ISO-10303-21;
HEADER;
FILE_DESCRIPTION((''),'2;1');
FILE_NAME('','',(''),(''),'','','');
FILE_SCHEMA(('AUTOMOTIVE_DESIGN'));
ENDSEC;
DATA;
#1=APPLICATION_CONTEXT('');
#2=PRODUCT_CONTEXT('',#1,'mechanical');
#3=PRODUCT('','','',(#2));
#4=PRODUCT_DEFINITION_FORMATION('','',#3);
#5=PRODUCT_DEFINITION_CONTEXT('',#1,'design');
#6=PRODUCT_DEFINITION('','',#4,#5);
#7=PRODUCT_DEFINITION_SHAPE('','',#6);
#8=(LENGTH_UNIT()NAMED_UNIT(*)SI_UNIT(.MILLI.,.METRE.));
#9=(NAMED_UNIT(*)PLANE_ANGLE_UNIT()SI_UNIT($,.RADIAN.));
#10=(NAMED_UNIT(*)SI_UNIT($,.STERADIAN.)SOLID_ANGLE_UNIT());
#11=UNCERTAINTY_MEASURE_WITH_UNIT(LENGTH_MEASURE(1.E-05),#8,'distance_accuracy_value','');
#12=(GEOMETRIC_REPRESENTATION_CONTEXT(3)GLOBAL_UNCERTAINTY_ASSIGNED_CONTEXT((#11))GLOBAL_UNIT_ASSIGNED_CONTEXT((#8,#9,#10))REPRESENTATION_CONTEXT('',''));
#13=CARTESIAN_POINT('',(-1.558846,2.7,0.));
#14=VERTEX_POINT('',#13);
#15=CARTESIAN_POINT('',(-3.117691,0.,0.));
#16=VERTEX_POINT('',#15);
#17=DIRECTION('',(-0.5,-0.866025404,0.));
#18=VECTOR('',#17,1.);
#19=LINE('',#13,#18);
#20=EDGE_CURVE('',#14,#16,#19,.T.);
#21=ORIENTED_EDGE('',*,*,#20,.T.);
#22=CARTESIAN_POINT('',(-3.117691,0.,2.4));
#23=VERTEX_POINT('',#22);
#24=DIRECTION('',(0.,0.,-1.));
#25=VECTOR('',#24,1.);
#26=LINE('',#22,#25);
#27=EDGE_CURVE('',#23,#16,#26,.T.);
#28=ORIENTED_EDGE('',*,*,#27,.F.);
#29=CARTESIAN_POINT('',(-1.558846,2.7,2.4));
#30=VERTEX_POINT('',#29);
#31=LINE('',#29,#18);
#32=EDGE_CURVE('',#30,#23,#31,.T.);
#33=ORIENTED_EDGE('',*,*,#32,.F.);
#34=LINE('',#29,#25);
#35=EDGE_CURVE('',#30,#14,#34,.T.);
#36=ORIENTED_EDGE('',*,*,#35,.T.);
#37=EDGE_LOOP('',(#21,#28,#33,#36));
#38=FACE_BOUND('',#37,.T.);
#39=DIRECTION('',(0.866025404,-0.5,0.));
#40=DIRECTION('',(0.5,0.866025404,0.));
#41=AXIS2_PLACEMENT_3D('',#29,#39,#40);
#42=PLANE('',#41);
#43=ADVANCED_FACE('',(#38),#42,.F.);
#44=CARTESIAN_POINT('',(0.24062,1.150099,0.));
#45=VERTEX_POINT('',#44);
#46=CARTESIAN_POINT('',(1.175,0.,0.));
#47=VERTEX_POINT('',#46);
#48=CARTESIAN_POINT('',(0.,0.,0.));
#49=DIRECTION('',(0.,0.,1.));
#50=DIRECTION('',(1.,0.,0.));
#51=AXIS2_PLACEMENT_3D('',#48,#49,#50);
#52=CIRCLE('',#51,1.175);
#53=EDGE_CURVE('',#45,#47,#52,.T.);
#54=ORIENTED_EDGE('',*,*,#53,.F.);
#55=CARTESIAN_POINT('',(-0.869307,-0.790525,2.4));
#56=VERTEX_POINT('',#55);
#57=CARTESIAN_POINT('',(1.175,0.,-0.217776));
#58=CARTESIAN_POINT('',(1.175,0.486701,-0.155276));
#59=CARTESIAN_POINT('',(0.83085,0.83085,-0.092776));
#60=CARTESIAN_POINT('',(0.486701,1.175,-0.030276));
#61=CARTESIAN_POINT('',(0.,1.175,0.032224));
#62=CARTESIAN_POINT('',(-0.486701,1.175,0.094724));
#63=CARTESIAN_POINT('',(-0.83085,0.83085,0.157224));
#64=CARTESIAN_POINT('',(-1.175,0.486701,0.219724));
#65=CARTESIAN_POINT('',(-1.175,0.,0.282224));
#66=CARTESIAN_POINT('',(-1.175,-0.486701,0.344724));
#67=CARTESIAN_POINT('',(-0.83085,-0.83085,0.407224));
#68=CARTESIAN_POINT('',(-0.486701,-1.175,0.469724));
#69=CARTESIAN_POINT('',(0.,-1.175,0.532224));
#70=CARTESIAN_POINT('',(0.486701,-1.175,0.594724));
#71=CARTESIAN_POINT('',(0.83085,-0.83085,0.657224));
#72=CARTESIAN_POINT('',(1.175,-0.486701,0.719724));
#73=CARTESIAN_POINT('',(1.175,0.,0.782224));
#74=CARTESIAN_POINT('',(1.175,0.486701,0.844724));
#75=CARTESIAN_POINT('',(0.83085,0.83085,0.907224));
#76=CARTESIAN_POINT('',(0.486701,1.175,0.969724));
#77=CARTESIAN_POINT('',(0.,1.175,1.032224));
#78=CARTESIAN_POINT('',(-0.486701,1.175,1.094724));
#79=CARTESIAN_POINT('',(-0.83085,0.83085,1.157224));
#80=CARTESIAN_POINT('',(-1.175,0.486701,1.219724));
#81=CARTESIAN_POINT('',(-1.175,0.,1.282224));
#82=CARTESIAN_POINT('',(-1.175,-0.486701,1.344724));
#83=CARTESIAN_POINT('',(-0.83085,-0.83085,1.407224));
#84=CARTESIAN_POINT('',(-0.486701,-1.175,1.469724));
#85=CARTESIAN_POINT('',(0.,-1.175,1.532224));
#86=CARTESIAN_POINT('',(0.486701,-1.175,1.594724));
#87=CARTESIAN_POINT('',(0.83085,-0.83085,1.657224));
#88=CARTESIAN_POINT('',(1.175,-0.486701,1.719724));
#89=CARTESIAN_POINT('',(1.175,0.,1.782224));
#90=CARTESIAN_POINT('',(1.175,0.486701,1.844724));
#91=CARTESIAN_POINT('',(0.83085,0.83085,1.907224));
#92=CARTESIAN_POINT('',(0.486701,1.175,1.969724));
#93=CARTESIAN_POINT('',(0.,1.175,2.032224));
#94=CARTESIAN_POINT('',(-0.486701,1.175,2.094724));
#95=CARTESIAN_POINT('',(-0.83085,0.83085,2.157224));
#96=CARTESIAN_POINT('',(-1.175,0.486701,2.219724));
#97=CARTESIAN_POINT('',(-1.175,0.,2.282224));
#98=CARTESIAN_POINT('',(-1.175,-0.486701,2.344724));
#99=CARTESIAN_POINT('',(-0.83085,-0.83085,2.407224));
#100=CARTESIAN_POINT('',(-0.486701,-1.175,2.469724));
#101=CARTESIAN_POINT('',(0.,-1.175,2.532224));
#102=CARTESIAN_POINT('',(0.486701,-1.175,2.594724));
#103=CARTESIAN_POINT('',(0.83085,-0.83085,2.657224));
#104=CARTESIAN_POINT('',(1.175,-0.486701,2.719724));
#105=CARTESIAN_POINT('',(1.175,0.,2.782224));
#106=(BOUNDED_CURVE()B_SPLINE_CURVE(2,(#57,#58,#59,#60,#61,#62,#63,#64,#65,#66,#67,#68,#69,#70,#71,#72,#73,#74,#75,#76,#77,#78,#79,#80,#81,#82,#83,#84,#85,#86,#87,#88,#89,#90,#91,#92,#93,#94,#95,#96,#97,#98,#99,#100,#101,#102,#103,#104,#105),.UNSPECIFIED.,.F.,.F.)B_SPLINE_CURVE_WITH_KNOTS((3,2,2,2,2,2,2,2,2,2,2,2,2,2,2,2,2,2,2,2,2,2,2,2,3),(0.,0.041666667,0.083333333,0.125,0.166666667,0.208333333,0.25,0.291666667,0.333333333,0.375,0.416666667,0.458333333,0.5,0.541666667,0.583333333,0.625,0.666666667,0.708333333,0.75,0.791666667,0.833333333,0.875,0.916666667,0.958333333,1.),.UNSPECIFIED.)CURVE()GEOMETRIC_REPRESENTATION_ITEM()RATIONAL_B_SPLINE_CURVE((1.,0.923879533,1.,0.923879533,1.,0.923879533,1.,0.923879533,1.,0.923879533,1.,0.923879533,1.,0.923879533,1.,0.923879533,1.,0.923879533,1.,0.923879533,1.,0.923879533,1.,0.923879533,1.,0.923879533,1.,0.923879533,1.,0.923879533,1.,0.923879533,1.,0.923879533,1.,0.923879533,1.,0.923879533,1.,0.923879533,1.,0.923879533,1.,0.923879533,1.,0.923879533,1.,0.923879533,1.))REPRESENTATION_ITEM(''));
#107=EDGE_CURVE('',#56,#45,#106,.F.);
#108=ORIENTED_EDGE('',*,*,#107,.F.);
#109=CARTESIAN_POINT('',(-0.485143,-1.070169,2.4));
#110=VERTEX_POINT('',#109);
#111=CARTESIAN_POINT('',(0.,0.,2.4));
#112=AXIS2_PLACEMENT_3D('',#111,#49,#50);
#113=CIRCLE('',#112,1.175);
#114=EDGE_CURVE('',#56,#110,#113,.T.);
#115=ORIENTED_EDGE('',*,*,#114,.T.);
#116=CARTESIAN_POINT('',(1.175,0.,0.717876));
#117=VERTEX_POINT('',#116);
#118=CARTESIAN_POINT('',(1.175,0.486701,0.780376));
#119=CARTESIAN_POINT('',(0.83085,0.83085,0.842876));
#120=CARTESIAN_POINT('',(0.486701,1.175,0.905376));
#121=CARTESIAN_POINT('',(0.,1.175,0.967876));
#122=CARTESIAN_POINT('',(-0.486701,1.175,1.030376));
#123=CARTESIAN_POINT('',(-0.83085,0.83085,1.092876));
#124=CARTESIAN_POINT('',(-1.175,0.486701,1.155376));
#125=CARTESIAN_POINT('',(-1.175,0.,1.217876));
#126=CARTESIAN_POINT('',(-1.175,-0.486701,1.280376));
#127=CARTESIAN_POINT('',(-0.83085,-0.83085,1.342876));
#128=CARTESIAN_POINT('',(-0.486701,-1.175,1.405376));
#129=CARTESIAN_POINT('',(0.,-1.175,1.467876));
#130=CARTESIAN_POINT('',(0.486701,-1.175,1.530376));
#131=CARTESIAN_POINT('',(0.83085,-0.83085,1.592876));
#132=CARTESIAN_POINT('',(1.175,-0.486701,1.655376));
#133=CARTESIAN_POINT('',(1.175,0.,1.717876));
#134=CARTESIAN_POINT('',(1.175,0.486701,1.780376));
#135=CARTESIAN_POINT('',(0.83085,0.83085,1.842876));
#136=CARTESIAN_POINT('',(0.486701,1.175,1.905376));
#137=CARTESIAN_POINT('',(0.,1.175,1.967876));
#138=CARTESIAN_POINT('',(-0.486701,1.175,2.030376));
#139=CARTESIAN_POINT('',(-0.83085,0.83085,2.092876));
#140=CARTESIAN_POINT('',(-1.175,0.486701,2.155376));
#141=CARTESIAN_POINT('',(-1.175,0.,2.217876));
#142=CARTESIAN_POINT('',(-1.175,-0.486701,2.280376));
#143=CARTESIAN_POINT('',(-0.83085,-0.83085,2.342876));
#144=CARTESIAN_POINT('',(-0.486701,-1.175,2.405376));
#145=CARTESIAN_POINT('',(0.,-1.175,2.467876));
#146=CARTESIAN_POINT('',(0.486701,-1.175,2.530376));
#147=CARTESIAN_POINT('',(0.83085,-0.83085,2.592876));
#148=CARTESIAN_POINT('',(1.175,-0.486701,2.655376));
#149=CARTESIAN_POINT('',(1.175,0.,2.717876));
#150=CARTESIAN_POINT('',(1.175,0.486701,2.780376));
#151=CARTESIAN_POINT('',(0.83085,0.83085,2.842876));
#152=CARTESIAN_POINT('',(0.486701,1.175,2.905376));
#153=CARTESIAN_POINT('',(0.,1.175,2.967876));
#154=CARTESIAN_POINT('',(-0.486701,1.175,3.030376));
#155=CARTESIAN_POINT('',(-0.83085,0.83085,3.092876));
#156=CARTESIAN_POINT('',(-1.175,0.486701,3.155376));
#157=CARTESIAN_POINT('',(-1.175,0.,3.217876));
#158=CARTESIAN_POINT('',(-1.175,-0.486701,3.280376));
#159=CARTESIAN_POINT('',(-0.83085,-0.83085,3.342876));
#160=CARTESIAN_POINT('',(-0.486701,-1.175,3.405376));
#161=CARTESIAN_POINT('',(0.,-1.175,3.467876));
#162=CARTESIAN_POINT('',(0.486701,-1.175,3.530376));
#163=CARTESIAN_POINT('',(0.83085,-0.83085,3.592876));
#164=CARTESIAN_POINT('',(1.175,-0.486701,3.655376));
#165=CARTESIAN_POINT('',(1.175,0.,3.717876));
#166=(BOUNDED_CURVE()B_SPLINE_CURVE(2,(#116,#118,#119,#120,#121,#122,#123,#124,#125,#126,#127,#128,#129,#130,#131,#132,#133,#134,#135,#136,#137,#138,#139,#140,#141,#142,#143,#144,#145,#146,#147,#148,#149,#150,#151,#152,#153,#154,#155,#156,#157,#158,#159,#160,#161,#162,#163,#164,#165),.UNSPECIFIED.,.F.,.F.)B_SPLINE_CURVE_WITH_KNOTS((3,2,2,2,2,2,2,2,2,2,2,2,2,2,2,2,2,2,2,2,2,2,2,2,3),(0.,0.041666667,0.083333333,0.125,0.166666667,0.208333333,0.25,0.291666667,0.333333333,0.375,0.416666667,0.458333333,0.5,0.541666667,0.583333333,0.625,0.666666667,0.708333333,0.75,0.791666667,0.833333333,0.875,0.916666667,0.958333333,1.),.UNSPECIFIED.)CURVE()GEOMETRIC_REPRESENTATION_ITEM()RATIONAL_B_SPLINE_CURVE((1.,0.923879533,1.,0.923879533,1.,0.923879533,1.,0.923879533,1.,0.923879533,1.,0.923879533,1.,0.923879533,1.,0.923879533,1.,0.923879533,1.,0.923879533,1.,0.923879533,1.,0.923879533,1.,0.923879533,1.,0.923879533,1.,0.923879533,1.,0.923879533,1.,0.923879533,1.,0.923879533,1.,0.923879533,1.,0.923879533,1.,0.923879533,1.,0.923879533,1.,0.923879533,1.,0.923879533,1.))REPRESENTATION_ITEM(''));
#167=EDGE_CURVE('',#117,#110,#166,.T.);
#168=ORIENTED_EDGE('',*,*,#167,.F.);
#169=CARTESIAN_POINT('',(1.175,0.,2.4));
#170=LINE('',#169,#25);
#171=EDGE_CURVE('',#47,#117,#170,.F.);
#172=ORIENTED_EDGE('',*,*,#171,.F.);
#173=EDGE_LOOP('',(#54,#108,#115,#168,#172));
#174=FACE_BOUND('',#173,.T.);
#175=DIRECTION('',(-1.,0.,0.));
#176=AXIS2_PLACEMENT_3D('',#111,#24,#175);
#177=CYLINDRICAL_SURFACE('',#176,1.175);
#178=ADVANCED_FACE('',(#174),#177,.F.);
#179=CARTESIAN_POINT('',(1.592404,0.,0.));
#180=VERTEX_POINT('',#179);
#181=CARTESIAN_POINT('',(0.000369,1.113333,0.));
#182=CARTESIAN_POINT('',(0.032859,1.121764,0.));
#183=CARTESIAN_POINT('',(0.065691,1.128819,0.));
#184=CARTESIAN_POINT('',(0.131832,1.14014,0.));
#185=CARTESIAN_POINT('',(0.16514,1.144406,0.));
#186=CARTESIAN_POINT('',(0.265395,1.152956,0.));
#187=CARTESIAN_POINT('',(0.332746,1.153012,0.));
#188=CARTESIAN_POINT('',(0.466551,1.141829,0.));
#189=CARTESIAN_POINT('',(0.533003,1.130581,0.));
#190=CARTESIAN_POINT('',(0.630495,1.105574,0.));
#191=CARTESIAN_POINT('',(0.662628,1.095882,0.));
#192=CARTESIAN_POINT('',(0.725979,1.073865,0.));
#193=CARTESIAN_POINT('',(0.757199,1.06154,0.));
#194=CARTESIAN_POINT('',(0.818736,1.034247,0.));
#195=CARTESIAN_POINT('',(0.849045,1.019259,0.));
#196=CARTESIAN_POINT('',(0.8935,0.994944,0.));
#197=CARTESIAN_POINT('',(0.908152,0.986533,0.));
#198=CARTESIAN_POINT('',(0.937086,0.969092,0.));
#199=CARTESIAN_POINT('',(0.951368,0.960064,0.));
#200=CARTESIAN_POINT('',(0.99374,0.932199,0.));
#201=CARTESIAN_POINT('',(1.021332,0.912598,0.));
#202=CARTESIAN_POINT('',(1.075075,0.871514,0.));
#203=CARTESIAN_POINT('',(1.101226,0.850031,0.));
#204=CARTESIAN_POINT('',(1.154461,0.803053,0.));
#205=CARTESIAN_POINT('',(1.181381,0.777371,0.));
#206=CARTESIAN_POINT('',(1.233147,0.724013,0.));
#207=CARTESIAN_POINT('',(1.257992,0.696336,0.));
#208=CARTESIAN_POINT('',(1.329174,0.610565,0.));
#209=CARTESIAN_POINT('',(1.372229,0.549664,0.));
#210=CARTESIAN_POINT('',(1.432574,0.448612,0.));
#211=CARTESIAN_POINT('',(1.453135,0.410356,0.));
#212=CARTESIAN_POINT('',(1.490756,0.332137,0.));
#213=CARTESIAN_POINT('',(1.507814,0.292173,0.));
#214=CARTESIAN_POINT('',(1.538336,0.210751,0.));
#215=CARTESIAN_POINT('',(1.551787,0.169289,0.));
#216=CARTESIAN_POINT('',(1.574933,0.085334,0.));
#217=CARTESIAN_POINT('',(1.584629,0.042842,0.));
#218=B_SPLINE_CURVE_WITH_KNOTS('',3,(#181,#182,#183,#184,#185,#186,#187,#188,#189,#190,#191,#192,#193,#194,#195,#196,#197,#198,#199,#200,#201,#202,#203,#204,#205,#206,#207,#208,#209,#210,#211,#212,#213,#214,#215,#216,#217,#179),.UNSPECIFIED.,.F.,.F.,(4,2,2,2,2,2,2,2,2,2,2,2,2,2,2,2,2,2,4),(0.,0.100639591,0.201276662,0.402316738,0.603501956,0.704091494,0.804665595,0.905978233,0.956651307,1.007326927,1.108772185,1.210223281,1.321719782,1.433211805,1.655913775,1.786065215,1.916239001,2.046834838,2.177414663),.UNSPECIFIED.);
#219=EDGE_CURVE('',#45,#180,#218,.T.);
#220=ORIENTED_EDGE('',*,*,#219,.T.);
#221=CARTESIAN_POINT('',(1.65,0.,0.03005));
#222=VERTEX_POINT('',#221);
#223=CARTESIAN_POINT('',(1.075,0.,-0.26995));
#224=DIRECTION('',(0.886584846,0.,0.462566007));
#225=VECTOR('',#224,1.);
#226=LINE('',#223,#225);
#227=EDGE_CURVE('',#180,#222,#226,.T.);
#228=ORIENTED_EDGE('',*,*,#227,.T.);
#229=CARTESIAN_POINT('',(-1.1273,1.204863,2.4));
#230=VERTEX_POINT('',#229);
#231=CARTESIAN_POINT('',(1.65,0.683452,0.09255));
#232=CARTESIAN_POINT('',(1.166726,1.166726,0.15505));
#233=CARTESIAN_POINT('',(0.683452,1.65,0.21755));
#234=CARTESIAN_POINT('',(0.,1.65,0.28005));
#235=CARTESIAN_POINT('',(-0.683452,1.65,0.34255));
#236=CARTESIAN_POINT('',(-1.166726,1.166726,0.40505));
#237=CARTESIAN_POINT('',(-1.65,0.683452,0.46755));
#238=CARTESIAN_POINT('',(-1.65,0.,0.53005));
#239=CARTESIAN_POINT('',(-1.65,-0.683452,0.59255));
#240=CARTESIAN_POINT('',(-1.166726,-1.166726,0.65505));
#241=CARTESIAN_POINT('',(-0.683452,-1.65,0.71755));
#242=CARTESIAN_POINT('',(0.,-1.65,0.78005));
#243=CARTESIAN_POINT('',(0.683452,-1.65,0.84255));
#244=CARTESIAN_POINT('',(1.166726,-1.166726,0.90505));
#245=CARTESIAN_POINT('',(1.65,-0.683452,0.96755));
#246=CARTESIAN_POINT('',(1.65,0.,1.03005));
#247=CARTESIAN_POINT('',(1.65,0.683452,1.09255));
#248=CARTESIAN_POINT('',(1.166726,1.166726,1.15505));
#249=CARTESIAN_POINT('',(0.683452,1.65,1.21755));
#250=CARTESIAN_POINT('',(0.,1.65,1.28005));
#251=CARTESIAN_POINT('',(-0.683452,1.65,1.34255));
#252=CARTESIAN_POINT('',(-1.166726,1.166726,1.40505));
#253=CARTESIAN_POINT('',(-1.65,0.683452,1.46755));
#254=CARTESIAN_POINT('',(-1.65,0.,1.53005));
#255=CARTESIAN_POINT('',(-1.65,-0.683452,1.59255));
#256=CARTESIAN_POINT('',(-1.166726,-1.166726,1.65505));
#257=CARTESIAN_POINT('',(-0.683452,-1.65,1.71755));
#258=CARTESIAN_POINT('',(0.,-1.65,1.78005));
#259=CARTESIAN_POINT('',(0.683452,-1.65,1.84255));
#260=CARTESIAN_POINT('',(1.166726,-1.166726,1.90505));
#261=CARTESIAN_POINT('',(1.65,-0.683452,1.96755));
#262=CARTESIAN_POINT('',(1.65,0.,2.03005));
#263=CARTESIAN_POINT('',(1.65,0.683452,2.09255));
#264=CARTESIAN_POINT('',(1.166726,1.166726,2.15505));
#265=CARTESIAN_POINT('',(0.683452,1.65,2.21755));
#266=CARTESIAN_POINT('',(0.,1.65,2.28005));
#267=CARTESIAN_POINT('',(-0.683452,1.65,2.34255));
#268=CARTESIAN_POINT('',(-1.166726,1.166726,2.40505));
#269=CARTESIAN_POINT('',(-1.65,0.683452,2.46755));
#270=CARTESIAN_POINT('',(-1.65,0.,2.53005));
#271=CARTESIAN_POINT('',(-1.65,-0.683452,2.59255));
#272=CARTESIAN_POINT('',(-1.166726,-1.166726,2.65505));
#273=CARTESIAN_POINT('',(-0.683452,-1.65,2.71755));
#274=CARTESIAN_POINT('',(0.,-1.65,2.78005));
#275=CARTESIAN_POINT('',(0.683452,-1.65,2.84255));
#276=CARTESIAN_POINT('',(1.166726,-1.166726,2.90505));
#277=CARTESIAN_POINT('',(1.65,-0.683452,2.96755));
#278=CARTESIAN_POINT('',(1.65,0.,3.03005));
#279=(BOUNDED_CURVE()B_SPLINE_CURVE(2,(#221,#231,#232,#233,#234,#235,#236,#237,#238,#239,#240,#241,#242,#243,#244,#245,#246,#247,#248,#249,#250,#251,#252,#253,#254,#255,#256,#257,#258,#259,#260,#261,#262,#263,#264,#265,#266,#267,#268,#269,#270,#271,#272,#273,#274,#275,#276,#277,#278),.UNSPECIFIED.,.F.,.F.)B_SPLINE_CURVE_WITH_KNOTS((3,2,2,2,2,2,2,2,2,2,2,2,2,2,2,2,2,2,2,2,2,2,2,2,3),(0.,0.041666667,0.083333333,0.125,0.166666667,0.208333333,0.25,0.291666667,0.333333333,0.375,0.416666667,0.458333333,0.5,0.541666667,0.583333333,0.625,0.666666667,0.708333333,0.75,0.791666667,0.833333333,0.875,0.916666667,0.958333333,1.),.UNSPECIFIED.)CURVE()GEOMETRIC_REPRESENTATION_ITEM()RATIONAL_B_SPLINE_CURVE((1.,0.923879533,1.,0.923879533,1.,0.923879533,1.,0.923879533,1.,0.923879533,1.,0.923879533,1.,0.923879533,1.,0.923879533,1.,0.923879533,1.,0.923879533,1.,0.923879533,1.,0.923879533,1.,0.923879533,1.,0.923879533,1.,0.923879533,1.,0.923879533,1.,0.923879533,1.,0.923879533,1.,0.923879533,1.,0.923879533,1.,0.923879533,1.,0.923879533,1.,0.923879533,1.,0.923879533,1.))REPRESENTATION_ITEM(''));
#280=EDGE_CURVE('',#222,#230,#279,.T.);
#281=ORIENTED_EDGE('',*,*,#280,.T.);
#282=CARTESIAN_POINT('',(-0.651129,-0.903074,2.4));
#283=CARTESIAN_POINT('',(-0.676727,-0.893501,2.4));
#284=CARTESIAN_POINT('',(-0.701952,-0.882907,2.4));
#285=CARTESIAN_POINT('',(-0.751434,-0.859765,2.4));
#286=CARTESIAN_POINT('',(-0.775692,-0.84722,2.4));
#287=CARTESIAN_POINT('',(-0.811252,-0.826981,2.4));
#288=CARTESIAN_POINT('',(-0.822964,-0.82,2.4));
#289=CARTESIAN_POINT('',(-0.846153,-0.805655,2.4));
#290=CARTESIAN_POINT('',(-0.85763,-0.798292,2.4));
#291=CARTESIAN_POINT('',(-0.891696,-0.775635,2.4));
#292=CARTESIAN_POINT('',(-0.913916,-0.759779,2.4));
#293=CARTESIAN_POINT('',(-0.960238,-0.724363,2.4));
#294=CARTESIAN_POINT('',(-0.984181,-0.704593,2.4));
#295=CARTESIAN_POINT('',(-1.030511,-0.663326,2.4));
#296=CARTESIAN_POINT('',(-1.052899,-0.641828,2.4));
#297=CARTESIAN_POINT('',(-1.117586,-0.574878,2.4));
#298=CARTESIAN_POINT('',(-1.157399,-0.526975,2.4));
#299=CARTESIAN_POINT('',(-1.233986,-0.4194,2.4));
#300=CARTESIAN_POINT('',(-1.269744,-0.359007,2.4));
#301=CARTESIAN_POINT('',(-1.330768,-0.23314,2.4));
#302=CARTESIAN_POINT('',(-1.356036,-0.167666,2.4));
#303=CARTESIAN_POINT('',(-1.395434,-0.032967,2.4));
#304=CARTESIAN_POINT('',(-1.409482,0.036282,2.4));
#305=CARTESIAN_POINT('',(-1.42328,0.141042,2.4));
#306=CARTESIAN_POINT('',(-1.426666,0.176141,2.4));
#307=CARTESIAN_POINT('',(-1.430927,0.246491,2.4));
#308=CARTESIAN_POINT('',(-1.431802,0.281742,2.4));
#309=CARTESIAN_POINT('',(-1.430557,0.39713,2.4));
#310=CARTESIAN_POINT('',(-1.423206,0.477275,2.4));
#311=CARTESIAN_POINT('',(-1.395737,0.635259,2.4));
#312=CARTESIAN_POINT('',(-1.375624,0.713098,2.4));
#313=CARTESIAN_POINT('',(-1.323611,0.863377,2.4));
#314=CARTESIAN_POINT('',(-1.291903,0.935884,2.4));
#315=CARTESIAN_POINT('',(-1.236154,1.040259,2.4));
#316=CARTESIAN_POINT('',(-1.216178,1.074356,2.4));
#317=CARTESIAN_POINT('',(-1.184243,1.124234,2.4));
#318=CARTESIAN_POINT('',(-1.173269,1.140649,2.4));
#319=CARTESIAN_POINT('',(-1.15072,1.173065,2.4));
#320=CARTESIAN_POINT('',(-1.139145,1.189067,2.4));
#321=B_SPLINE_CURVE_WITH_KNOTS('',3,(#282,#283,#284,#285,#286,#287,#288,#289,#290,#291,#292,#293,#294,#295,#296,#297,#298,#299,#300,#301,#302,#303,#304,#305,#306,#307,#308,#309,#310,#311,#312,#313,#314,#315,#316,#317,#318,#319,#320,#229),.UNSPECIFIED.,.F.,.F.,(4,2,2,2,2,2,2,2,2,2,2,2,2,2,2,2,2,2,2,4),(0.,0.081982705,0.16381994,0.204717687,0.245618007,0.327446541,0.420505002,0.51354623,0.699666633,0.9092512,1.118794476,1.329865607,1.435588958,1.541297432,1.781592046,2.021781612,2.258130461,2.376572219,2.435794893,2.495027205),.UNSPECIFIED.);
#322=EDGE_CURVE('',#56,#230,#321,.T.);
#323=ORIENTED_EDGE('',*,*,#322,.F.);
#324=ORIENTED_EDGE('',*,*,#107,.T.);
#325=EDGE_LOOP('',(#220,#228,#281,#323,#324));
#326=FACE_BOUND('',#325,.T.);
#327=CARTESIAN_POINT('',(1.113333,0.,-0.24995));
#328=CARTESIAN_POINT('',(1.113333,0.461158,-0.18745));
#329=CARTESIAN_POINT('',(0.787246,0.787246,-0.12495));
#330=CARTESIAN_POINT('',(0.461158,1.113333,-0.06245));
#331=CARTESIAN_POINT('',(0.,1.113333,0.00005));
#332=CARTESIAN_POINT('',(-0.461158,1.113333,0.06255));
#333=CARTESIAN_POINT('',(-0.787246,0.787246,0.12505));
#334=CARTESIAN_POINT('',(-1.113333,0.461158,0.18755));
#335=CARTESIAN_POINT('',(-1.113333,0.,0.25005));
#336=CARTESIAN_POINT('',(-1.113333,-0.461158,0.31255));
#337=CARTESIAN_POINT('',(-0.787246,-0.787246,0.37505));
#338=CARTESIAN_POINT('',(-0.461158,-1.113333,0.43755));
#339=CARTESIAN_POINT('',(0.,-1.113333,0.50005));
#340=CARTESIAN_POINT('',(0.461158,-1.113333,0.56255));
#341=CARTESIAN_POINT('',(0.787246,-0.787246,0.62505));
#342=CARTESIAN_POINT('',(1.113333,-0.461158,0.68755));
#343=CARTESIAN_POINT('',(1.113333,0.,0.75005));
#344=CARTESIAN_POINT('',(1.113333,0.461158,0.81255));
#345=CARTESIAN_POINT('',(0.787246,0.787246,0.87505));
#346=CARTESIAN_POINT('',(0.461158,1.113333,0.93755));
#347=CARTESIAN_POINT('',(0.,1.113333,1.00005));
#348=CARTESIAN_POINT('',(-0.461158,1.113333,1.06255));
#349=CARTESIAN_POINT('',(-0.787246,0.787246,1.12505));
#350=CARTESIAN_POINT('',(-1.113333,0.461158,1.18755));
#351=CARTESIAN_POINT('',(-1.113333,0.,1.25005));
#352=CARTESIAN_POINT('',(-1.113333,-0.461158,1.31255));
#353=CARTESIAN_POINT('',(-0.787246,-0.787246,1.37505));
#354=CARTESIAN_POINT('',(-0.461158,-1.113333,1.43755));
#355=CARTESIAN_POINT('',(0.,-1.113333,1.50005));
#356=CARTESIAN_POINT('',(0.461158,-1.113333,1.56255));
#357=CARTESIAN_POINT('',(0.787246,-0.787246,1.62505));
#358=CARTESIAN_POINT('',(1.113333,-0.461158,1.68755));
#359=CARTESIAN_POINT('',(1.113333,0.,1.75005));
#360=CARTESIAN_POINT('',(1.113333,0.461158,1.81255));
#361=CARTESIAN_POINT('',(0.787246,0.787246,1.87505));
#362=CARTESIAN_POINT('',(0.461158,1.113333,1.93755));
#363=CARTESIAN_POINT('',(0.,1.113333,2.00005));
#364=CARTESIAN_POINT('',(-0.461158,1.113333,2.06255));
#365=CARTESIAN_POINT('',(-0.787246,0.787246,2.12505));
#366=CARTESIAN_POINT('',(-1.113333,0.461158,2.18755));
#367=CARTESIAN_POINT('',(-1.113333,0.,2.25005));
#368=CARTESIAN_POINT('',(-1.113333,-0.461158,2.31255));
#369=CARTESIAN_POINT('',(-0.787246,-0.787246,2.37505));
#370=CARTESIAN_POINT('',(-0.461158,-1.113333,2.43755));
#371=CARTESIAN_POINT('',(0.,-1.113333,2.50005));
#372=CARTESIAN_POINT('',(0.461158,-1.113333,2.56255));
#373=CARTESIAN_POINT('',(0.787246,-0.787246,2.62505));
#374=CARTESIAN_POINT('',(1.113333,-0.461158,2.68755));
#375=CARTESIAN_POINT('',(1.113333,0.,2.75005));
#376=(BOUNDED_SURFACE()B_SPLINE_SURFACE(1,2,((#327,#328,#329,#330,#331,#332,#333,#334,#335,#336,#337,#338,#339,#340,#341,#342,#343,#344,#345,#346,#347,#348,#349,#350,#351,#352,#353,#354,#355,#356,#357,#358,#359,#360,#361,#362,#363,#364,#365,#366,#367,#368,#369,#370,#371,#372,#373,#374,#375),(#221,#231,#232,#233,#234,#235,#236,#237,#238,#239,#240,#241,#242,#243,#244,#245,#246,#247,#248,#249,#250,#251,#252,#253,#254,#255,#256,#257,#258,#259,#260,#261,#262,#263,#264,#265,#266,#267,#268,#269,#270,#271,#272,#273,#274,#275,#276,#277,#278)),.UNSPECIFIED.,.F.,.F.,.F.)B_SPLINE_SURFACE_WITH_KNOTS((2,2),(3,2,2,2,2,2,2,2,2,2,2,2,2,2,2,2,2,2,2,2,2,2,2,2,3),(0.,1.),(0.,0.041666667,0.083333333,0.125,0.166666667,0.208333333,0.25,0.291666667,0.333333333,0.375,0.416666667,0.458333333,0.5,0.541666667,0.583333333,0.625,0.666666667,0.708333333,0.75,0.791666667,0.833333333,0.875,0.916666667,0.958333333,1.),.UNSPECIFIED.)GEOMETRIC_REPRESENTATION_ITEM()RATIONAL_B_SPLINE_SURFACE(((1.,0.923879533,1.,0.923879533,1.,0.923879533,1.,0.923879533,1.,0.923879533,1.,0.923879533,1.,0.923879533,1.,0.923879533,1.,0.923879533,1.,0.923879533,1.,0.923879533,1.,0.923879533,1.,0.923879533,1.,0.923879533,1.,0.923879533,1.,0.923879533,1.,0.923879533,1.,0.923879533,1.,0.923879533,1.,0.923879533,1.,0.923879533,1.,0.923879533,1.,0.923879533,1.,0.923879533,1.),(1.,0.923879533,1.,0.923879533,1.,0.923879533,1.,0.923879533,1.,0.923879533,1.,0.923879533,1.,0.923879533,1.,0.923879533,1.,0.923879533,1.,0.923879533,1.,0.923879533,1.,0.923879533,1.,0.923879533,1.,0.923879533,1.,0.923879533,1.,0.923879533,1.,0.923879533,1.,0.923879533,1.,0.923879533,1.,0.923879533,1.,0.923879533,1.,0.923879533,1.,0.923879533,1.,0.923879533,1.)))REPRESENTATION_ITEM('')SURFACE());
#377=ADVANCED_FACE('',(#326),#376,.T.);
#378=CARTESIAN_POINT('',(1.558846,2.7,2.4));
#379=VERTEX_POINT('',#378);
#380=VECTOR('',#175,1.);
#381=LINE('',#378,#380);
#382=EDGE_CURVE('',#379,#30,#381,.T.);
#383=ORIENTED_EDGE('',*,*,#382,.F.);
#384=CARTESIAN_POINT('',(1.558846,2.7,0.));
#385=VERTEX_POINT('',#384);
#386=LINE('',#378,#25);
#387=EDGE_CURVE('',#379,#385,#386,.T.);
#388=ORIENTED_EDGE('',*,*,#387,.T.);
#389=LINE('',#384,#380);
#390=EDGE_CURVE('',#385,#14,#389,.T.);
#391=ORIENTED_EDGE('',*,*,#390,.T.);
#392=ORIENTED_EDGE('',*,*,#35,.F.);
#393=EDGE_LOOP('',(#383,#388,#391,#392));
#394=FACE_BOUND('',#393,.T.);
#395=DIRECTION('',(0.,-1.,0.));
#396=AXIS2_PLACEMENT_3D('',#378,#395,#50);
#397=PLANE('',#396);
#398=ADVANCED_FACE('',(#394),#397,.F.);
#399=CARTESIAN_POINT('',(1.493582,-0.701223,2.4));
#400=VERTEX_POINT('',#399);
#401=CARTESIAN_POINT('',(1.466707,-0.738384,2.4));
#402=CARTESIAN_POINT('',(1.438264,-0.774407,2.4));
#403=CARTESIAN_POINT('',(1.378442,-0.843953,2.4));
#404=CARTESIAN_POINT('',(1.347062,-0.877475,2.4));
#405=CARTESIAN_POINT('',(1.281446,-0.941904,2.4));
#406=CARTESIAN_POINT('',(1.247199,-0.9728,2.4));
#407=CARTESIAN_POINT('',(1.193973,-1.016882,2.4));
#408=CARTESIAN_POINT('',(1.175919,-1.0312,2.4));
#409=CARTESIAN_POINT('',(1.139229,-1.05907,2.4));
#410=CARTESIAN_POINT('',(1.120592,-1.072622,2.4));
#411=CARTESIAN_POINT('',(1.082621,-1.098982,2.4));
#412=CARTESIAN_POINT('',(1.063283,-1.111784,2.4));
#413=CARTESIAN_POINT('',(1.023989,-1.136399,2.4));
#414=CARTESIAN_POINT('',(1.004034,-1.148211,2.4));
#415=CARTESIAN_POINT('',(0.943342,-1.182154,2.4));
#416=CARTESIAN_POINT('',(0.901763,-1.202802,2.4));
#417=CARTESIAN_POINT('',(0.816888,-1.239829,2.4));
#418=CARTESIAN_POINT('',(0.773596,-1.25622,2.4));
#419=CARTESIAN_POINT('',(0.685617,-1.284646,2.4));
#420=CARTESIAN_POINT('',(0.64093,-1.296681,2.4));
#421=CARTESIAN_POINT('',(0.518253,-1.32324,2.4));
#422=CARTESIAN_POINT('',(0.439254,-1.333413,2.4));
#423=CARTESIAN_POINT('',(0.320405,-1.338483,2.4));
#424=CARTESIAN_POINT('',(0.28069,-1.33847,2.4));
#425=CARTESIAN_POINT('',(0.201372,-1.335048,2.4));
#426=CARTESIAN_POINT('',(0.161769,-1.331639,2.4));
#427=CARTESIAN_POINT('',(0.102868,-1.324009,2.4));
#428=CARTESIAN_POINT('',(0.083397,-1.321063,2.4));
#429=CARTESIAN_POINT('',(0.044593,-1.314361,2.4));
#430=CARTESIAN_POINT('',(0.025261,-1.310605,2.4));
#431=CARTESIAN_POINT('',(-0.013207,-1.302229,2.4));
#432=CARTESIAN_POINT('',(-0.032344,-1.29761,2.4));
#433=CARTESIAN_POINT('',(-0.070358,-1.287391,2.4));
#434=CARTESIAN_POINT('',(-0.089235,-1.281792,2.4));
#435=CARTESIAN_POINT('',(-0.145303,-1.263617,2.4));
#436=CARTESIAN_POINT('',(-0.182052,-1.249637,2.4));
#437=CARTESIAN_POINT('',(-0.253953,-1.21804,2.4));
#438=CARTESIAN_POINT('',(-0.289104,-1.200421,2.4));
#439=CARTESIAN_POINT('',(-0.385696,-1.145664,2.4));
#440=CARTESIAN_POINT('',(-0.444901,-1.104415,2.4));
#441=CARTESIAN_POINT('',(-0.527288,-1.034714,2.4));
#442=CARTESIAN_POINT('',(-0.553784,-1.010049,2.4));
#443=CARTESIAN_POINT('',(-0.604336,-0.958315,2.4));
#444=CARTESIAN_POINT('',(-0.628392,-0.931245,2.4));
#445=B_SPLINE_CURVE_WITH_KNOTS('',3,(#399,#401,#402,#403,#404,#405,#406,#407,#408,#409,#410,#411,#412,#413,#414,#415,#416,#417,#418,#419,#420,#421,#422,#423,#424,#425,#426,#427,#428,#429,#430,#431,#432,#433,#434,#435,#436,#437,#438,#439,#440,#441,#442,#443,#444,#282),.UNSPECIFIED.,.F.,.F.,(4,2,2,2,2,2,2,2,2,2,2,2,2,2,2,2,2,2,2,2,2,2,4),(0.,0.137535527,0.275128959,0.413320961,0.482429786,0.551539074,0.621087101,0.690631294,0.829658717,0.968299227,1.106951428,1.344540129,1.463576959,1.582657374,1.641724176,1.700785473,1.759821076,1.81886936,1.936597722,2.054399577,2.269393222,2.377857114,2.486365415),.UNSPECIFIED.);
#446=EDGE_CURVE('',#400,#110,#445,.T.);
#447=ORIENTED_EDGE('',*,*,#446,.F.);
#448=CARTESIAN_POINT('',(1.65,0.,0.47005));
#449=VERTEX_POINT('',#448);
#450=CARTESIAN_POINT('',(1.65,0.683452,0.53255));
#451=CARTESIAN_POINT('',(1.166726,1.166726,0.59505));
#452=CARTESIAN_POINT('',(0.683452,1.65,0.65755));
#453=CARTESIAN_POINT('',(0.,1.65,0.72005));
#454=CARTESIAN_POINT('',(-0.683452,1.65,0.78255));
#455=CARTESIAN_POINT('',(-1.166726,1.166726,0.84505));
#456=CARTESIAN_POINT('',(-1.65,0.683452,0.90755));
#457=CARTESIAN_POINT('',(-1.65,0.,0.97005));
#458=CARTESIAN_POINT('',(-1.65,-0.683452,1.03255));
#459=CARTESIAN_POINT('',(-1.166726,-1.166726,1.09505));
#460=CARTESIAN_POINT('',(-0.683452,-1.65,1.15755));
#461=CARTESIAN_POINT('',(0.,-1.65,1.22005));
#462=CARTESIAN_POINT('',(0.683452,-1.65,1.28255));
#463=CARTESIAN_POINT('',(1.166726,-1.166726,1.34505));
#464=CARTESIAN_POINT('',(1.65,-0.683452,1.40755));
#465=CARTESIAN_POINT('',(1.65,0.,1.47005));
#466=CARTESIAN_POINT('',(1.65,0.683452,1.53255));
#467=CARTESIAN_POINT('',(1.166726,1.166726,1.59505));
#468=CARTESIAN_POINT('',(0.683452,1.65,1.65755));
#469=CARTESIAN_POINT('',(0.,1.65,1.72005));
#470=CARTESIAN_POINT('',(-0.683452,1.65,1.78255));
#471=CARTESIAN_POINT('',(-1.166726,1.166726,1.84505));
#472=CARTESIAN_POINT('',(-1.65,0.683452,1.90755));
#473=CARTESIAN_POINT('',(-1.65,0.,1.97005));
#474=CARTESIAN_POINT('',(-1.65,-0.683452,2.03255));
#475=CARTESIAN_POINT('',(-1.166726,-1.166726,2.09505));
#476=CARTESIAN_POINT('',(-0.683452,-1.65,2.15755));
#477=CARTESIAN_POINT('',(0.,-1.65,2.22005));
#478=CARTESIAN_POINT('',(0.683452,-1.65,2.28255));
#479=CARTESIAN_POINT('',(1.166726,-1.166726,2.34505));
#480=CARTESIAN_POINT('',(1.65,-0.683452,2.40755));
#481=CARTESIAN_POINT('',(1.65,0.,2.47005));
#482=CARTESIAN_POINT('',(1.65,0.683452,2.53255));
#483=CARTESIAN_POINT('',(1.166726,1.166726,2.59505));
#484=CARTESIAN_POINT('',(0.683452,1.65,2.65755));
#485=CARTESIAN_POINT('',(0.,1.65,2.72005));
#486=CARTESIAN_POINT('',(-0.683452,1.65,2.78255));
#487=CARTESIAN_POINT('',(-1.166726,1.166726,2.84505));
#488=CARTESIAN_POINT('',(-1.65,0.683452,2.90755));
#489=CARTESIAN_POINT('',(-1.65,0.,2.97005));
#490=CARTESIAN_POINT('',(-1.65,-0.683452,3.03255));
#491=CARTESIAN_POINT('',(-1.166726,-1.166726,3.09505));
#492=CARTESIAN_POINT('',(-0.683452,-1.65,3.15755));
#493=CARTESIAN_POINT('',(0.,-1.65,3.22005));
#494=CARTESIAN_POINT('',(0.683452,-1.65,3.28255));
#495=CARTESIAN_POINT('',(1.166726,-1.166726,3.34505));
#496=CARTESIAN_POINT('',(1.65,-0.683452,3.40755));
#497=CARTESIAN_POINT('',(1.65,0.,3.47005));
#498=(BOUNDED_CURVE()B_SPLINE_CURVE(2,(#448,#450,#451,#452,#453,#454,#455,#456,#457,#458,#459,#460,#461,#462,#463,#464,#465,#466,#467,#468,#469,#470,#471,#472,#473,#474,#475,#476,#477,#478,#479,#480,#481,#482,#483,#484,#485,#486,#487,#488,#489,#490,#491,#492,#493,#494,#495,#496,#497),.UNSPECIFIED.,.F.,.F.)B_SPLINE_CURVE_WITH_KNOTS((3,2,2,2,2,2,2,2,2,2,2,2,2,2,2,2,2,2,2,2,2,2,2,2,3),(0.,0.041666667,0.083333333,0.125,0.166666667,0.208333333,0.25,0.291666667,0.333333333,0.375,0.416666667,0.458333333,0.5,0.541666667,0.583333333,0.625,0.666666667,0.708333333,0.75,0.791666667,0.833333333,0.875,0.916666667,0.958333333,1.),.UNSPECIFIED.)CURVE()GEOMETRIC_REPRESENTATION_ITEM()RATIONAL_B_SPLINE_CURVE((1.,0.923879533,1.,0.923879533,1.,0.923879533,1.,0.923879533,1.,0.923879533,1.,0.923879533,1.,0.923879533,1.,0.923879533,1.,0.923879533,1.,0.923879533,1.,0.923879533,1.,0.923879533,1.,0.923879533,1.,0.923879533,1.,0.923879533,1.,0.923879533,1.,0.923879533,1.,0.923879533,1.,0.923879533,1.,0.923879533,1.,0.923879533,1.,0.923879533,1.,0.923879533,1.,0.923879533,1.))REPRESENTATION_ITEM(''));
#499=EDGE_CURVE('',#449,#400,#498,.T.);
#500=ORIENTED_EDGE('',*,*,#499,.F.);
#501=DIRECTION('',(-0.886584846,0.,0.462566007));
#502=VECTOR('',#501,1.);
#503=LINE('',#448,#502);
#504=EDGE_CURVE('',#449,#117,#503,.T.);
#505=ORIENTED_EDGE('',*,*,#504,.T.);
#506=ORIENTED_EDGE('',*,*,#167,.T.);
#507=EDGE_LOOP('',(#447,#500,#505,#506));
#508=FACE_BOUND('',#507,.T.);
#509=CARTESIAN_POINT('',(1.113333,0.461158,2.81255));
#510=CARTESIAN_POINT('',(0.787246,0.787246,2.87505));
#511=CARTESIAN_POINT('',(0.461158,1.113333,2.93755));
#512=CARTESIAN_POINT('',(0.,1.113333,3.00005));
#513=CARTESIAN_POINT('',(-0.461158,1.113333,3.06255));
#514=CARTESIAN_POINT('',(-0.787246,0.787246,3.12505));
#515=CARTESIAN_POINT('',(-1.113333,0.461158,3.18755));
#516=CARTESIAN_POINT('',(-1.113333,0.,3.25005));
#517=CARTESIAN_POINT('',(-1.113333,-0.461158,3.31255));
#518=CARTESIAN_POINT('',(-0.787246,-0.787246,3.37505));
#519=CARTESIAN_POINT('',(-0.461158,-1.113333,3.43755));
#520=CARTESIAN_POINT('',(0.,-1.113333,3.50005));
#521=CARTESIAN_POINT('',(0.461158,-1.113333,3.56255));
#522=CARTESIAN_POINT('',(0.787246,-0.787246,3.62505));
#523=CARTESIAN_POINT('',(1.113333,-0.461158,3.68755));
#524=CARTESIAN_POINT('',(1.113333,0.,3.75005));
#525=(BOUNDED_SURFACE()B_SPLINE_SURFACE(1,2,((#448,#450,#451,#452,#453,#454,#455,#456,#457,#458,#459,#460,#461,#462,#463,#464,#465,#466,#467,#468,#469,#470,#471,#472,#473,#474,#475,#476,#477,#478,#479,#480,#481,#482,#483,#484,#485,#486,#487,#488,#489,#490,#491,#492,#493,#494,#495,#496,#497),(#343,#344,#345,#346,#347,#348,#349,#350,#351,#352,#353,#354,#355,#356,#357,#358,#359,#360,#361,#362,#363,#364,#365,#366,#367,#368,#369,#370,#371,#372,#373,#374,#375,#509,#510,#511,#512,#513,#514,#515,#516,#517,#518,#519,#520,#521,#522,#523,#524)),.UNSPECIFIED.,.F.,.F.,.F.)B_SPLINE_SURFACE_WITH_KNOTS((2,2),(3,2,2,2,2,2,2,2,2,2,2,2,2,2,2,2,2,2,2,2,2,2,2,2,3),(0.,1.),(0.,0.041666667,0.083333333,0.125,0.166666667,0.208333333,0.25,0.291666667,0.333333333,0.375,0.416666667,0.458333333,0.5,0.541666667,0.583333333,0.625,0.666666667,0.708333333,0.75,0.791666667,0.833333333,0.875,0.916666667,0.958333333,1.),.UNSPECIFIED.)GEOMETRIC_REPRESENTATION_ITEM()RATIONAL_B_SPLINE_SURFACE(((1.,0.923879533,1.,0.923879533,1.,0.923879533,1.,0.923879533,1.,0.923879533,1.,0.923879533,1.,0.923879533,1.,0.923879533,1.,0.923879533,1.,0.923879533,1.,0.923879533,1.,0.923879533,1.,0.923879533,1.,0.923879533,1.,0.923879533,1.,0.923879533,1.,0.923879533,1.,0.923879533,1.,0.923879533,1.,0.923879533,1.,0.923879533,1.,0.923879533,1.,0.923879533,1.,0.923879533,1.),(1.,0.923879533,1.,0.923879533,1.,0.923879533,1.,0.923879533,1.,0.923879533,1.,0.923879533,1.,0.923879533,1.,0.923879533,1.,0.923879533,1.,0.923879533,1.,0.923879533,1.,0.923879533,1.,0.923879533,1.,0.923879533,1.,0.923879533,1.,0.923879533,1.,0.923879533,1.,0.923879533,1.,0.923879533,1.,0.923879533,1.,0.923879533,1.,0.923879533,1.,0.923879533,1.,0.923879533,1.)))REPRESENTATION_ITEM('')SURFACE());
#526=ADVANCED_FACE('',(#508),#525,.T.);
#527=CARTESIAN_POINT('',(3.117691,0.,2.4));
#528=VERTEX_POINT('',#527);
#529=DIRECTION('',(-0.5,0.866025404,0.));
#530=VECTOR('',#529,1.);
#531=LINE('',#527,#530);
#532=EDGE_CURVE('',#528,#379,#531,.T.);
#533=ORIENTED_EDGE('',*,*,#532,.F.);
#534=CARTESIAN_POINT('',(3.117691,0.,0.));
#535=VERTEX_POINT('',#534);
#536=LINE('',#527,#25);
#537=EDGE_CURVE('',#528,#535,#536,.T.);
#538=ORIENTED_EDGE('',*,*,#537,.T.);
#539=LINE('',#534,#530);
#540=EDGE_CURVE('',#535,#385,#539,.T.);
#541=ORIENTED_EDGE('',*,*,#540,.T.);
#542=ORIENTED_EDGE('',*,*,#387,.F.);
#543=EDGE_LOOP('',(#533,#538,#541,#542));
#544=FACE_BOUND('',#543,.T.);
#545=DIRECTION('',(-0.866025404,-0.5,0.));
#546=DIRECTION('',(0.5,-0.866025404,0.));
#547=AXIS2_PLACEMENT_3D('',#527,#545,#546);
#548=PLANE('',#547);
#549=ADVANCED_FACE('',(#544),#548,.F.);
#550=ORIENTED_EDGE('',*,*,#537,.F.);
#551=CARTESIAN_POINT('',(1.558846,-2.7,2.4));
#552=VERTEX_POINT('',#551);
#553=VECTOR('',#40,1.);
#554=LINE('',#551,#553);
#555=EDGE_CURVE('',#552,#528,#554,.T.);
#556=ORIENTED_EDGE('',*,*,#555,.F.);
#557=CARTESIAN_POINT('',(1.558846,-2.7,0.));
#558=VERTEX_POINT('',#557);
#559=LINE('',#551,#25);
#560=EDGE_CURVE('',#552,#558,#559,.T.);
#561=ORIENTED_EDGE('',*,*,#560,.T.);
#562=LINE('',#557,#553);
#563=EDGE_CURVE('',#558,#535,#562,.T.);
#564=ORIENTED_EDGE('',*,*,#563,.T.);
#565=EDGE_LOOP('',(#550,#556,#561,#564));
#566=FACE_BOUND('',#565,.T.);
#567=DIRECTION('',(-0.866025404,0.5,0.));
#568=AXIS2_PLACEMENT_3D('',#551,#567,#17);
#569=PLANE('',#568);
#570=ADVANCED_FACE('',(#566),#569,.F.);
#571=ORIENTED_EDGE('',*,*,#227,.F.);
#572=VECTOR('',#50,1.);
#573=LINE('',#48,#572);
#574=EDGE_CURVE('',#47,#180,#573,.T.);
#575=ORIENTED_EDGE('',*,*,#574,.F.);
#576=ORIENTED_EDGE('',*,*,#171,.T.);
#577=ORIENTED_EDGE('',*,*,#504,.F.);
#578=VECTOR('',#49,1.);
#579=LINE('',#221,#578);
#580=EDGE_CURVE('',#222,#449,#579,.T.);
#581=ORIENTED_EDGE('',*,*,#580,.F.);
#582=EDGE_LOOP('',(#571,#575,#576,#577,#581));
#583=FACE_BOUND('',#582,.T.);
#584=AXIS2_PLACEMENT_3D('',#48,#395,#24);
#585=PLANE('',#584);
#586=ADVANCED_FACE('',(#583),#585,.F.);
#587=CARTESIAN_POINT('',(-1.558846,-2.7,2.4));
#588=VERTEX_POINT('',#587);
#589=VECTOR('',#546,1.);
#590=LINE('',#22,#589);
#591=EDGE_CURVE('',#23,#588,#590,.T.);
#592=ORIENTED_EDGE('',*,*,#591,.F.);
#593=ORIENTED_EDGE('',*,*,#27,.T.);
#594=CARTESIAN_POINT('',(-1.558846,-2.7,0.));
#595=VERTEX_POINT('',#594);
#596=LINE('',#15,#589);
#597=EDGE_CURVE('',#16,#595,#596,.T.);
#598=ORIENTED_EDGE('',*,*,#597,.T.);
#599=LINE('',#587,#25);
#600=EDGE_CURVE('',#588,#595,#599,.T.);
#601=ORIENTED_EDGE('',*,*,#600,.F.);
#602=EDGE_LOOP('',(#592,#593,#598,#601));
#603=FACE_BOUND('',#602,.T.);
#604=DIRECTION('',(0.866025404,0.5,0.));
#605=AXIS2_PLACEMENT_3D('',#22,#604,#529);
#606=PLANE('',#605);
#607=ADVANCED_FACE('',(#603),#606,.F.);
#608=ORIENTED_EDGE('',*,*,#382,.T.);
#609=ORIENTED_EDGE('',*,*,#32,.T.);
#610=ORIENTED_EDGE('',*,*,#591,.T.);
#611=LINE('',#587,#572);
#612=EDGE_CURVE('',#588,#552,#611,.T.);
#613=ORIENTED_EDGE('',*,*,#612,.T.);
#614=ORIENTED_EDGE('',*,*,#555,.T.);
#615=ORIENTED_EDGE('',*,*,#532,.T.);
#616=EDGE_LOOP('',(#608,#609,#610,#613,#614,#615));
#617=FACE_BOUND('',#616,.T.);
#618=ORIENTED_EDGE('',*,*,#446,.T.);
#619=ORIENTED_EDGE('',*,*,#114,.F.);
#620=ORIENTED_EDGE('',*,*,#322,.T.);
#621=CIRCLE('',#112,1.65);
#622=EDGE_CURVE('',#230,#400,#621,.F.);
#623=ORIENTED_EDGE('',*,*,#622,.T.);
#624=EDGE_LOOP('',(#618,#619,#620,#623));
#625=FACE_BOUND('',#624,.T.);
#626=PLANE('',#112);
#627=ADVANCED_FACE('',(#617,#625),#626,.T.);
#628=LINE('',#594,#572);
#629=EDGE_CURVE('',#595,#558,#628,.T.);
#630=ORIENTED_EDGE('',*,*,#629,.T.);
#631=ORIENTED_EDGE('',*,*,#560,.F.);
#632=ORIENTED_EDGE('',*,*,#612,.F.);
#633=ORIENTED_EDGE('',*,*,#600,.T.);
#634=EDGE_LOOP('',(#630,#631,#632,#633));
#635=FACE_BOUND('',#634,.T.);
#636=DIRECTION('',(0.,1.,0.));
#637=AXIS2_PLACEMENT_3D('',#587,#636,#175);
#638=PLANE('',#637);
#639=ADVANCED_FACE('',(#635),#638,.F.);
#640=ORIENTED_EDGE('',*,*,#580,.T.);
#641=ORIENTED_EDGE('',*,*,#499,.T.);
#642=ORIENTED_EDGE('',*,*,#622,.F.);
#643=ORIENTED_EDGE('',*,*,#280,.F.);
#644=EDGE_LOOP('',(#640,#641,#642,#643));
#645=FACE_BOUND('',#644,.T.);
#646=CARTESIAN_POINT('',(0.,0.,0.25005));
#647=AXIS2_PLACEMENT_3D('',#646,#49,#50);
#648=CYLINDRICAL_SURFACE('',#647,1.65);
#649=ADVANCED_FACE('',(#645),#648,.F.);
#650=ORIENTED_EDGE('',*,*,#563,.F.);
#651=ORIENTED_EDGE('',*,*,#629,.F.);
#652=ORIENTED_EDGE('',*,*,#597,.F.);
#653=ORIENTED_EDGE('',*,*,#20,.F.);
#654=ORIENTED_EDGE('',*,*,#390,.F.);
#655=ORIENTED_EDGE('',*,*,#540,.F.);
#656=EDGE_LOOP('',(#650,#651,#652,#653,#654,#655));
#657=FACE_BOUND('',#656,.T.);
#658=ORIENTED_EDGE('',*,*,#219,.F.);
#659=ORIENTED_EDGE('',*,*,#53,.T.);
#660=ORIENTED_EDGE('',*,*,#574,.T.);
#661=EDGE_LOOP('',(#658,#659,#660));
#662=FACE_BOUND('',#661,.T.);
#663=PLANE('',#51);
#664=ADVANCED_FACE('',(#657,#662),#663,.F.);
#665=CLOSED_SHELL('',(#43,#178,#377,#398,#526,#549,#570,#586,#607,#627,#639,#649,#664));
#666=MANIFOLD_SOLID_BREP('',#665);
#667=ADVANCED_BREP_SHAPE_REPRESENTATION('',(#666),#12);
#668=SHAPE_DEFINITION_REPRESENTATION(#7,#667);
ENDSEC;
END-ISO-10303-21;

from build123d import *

# Parameters (mm, degrees)
SKETCH1_R                       = 1.175
PRINTED_NUT_AF5P4_H2P4_DEPTH    = 2.4
ACTUAL_MATCHING_FEMALE_P1_PITCH = 1


with BuildPart() as part:
    # Sketch1 → Printed_nut_AF5p4_H2p4 (new body)
    with BuildSketch(Plane.XY):
        Polygon((3.117691454, 0), (1.558845727, 2.7), (-1.558845727, 2.7), (-3.117691454, 0), (-1.558845727, -2.7), (1.558845727, -2.7), align=None)
        Circle(SKETCH1_R, mode=Mode.SUBTRACT)
    extrude(amount=PRINTED_NUT_AF5P4_H2P4_DEPTH)

    # Actual_matching_female_P1: the profile of 3DSketch1 screwed along a right-hand helix of 3 turns, 8 arcs to a turn; built about Z, then put on its axis
    actual_matching_female_p1_z = Axis((0, 0, 0), (0, 0, 1))
    actual_matching_female_p1_corners = [(1.075, 0, -0.52), (1.65, 0, -0.22), (1.65, 0, 0.22), (1.075, 0, 0.52)]
    with BuildLine(mode=Mode.PRIVATE) as actual_matching_female_p1_profile:
        Line(actual_matching_female_p1_corners[0], actual_matching_female_p1_corners[1])
        Line(actual_matching_female_p1_corners[1], actual_matching_female_p1_corners[2])
        Line(actual_matching_female_p1_corners[2], actual_matching_female_p1_corners[3])
        Line(actual_matching_female_p1_corners[3], actual_matching_female_p1_corners[0])
    actual_matching_female_p1_cap = Face(actual_matching_female_p1_profile.wire())
    actual_matching_female_p1_turn_angles = [0, 22.5, 45, 67.5, 90, 112.5, 135, 157.5, 180, 202.5, 225, 247.5, 270, 292.5, 315, 337.5, 360]
    actual_matching_female_p1_turn_weights = [1, 0.9238795325112867, 1, 0.9238795325112867, 1, 0.9238795325112867, 1, 0.9238795325112867, 1, 0.9238795325112867, 1, 0.9238795325112867, 1, 0.9238795325112867, 1, 0.9238795325112867, 1]
    actual_matching_female_p1_turn_rails = [Edge.make_bspline([Vector(p[0], p[1], 0).rotate(actual_matching_female_p1_z, actual_matching_female_p1_turn_angles[k]) / actual_matching_female_p1_turn_weights[k] + Vector(0, 0, p[2] + ACTUAL_MATCHING_FEMALE_P1_PITCH * actual_matching_female_p1_turn_angles[k] / 360) for k in range(17)], [0, 0, 0, 1, 1, 2, 2, 3, 3, 4, 4, 5, 5, 6, 6, 7, 7, 8, 8, 8], 2, actual_matching_female_p1_turn_weights) for p in actual_matching_female_p1_corners]
    actual_matching_female_p1_turn_sides = [Face.make_surface_from_curves(actual_matching_female_p1_turn_rails[p[0]], actual_matching_female_p1_turn_rails[p[1]]) for p in [(0, 1), (1, 2), (2, 3), (3, 0)]]
    actual_matching_female_p1 = Plane(origin=(0, 0, 0.25005), x_dir=(1, 0, 0), z_dir=(0, 0, 1)) * Solid(Shell([*[p.moved(Location((0, 0, ACTUAL_MATCHING_FEMALE_P1_PITCH * i))) for i in range(3) for p in actual_matching_female_p1_turn_sides], actual_matching_female_p1_cap, actual_matching_female_p1_cap.rotate(actual_matching_female_p1_z, 1080).moved(Location((0, 0, ACTUAL_MATCHING_FEMALE_P1_PITCH * 1080 / 360)))]))
    add(actual_matching_female_p1, mode=Mode.SUBTRACT)


solid = part.part
